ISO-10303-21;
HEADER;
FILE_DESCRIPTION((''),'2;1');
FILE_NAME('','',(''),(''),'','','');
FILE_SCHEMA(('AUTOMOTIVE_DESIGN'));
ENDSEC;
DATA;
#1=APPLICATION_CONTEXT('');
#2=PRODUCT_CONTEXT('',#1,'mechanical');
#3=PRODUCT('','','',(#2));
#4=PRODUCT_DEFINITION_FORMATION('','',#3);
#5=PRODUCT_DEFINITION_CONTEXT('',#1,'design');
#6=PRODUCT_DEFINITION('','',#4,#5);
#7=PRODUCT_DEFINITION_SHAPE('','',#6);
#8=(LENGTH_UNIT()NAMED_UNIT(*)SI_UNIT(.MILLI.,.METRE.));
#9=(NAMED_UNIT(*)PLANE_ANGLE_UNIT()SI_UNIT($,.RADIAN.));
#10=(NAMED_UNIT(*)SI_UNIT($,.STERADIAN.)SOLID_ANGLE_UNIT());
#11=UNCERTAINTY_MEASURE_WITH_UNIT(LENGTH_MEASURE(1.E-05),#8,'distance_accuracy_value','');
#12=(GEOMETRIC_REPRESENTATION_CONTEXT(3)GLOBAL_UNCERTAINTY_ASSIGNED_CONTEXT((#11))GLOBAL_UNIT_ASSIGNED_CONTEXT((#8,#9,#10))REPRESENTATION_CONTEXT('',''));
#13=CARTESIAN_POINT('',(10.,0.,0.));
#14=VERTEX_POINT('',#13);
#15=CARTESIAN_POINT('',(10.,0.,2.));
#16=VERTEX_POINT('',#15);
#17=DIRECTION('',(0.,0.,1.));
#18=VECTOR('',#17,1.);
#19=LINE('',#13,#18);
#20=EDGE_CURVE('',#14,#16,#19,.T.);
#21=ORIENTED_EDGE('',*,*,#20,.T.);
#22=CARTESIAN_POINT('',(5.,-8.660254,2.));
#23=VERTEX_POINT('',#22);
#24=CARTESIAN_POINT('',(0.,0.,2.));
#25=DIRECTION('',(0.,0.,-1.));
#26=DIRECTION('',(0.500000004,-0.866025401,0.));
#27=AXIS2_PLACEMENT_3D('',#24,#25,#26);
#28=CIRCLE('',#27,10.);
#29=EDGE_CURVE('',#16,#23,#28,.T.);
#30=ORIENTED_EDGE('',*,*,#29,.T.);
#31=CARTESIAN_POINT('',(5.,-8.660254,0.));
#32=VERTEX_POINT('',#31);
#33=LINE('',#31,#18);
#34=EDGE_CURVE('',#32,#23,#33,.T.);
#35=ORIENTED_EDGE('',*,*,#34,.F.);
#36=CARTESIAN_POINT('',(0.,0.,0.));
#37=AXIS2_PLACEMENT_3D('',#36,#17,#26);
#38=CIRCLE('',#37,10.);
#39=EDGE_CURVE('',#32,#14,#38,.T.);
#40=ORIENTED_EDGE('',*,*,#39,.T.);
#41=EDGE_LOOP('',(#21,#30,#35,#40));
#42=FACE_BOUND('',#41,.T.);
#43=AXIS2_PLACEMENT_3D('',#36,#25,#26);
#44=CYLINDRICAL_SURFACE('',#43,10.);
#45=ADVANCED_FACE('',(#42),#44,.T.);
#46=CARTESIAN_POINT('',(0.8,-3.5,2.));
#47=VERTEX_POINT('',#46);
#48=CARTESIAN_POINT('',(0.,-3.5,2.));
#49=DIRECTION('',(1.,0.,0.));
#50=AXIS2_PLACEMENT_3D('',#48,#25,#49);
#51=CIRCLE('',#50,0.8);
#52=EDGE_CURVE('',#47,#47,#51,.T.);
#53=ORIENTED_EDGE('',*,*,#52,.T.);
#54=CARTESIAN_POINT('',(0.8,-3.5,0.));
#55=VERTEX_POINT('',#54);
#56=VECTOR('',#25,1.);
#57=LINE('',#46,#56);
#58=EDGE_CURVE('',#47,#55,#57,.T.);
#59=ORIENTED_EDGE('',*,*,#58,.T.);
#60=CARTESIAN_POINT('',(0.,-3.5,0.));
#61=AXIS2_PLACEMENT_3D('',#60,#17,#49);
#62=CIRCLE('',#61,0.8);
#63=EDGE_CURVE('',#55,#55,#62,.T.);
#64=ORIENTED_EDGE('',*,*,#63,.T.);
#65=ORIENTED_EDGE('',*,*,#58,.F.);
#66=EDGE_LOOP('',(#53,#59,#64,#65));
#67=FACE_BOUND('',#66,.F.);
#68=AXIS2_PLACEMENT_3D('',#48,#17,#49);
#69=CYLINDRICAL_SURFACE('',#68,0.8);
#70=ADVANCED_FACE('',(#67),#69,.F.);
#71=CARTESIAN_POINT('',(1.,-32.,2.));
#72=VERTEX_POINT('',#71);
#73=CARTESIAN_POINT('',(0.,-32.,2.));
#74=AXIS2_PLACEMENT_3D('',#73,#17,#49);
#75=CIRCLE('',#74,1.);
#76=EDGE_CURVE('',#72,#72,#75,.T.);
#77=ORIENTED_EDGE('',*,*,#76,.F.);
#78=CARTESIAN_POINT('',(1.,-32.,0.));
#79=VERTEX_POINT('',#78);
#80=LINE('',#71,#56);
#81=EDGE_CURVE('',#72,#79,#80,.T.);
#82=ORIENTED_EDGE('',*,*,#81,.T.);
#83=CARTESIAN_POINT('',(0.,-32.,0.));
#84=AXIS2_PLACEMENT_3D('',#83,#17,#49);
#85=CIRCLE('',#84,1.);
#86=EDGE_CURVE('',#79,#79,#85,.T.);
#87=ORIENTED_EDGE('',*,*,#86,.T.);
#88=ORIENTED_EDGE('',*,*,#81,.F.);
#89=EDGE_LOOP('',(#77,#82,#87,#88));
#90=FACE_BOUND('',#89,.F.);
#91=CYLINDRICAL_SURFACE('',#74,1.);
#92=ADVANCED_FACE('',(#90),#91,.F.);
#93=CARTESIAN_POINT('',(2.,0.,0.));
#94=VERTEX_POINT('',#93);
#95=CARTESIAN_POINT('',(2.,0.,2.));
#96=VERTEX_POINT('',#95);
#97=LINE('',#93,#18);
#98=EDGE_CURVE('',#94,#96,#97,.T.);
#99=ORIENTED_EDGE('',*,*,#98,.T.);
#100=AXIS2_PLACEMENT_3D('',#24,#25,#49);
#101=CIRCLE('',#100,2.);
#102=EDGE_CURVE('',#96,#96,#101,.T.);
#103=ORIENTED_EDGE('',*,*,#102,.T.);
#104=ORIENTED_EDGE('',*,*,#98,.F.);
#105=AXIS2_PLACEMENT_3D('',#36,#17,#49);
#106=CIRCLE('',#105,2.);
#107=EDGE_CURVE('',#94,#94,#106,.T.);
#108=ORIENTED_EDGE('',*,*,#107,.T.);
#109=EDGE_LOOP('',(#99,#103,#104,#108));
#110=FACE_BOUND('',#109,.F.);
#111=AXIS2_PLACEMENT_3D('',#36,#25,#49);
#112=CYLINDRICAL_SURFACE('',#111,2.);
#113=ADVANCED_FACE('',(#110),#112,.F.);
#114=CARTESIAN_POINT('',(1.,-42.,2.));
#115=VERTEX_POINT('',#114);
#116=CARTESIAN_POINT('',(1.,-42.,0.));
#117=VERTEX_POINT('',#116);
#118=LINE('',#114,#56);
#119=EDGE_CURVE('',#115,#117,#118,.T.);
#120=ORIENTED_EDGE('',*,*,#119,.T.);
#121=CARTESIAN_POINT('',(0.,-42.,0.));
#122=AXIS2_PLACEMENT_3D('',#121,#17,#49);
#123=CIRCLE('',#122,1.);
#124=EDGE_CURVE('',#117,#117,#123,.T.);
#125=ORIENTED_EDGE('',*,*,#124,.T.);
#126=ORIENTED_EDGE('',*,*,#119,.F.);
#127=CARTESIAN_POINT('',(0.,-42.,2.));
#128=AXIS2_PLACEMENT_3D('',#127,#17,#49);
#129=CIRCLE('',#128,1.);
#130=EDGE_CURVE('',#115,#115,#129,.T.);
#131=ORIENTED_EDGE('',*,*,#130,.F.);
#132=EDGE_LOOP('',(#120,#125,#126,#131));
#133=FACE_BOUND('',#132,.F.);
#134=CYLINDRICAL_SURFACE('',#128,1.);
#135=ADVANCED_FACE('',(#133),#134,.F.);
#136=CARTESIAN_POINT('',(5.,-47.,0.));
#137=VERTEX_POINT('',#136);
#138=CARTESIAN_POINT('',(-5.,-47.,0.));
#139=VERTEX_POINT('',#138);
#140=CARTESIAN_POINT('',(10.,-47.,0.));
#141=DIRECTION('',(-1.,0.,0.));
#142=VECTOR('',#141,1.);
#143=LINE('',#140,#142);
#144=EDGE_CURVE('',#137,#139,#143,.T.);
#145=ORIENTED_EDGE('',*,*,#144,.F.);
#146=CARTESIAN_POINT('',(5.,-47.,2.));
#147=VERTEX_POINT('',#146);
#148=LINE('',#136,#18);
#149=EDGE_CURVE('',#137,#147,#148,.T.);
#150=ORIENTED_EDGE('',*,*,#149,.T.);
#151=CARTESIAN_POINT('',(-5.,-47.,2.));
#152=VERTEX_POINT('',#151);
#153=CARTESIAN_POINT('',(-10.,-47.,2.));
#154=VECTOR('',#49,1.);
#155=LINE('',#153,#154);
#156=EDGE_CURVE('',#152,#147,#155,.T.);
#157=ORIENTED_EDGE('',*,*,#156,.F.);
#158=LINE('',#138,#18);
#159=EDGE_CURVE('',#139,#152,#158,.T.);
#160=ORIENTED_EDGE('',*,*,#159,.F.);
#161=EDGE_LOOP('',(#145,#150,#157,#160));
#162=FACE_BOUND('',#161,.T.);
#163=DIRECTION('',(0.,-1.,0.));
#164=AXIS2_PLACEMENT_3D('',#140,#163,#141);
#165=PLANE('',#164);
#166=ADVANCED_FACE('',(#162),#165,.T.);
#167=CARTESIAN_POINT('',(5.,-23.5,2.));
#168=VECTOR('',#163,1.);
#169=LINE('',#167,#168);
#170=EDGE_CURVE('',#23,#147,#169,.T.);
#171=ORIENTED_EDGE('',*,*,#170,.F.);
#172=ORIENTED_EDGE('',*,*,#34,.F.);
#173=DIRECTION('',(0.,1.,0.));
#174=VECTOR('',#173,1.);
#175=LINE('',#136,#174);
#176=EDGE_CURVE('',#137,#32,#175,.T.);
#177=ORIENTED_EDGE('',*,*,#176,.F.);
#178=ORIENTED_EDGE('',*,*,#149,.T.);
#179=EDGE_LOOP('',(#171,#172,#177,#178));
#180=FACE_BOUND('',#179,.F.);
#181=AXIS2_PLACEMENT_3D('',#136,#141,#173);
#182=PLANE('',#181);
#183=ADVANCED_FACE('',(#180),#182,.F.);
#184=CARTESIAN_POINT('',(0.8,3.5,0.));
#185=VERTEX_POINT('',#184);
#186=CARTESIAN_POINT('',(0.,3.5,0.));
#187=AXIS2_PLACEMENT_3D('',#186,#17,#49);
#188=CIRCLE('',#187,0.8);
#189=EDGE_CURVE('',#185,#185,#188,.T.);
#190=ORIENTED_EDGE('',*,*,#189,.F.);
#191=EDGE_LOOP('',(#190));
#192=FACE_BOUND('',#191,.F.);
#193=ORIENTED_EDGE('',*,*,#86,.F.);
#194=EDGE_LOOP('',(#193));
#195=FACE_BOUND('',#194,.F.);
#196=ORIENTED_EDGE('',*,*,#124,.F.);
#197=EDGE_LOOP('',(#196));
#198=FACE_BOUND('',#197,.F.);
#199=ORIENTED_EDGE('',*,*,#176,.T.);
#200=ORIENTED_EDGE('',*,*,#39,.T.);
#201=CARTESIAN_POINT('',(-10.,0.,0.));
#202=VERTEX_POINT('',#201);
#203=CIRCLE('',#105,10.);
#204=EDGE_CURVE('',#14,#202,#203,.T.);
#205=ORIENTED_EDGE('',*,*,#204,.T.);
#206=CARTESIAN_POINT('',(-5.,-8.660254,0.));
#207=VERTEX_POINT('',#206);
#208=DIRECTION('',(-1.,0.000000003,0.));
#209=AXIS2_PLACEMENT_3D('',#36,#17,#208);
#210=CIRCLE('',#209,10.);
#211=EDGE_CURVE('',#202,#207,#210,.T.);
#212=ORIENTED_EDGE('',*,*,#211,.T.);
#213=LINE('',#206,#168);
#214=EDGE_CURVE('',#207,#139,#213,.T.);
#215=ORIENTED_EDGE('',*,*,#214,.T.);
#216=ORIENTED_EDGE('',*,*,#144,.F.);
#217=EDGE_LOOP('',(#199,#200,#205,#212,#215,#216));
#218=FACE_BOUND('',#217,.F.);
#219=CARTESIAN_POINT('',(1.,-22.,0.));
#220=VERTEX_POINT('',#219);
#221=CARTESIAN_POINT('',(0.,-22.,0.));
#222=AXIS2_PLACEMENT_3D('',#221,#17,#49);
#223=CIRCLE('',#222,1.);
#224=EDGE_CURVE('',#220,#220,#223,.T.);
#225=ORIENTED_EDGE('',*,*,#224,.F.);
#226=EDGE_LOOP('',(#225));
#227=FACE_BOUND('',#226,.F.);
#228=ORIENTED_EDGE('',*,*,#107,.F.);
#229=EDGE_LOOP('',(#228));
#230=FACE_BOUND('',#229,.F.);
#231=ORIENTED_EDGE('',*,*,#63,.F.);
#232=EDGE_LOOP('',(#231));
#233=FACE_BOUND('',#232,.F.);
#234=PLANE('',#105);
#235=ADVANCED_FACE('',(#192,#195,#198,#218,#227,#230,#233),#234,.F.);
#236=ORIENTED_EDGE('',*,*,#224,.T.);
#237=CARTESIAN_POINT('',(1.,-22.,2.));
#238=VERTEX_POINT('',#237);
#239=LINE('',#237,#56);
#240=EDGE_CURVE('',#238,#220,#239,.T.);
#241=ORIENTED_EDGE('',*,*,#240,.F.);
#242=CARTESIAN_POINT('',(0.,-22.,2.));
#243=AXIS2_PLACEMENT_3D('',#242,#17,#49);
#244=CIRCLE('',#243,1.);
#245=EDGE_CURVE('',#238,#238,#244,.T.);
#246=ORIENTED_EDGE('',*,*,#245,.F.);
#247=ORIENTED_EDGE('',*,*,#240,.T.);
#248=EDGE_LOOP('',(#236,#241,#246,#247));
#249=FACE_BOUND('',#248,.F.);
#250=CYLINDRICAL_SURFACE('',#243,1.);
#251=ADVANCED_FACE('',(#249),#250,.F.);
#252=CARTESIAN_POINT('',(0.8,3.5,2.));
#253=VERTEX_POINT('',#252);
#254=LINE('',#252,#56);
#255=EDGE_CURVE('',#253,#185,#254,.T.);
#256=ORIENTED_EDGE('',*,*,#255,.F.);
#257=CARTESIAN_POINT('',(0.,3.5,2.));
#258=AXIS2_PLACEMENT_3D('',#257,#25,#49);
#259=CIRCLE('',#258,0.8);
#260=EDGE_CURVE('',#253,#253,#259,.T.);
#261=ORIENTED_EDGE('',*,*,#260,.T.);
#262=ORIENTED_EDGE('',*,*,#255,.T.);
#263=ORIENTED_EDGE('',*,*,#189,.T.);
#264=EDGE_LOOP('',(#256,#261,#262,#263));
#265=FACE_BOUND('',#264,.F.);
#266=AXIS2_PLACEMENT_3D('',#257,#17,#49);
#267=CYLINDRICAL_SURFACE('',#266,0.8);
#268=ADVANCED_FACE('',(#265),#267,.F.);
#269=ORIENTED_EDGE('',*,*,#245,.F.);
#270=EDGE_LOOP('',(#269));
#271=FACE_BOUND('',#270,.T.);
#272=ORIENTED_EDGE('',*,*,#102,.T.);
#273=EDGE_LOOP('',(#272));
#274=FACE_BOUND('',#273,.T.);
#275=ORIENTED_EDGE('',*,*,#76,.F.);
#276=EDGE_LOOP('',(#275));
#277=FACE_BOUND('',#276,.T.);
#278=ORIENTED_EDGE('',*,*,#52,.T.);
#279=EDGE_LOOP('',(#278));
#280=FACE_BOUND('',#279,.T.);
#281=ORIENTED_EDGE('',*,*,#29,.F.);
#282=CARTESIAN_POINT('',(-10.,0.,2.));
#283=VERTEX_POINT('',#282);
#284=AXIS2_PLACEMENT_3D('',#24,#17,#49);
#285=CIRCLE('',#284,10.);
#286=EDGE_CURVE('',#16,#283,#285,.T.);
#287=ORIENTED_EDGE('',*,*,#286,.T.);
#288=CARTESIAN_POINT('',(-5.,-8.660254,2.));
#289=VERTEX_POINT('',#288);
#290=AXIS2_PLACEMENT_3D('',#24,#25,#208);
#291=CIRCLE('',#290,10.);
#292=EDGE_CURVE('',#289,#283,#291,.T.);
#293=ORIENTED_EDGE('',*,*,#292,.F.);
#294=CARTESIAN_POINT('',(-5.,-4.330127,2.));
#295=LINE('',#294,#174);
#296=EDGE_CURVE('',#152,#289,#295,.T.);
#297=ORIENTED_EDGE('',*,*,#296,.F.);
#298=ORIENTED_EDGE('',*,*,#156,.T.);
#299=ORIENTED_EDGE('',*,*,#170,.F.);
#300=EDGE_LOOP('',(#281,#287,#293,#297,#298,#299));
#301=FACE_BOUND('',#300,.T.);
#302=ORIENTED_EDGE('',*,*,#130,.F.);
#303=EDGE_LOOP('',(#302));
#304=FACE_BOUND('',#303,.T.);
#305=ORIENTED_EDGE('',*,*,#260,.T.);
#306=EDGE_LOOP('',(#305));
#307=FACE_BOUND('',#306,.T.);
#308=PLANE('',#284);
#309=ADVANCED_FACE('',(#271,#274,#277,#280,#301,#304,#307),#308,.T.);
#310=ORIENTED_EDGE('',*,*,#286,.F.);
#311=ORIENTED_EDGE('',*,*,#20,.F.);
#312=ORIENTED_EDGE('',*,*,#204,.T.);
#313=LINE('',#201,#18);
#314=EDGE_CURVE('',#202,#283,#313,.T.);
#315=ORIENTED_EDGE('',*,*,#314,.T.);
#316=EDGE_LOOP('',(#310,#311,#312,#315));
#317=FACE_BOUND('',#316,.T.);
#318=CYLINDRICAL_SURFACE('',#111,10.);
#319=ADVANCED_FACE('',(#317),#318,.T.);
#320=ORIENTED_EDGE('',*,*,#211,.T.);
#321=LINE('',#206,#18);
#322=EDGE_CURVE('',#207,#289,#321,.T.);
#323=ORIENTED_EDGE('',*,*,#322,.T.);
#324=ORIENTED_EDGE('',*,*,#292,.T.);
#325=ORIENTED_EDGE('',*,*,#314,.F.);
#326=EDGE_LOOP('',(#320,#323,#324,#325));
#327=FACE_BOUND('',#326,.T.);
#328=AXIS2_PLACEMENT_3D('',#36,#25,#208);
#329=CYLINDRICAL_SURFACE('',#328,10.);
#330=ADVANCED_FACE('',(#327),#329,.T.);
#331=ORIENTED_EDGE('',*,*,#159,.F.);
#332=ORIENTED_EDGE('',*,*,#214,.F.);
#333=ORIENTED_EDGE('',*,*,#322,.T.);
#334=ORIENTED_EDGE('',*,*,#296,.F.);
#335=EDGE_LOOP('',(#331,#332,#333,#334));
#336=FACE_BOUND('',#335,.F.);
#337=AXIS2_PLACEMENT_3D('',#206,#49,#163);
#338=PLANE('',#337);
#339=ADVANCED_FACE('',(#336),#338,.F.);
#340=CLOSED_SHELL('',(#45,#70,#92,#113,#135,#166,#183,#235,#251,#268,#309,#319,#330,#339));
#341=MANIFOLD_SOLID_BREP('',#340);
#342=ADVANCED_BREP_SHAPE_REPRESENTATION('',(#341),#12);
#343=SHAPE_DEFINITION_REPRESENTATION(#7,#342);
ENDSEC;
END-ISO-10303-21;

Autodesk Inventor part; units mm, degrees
ref_plane "YZ Plane" through (0, 0, 0) normal (1, 0, 0) x (0, 1, 0)
ref_plane "XZ Plane" through (0, 0, 0) normal (0, 1, 0) x (-1, 0, 0)
ref_plane "XY Plane" through (0, 0, 0) normal (0, 0, 1) x (1, 0, 0)
sketch "スケッチ1" plane through (0, 0, 0) normal (0, 0, 1) x (1, 0, 0)
  circle A0 centre (0, 0) radius 10
  circle A1 centre (0, 0) radius 2
  line L0 (0, -2) -> (0, -47)
  line L1 (10, 0) -> (10, -47)
  line L2 (10, -47) -> (-10, -47)
  line L3 (-10, -47) -> (-10, 0)
  circle A2 centre (0, -32) radius 1
  circle A3 centre (0, -42) radius 1
  circle A4 centre (0, -22) radius 1
  dimension "d1" = 4
  dimension "d0" = 20
  dimension "d2" = 45
  dimension "d9" = 2
  dimension "d10" = 2
  dimension "d11" = 2
extrude "押し出し1" add sketch "スケッチ1" along normal blind 2
sketch "スケッチ2" plane through (0, 0, 2) normal (0, 0, 1) x (1, 0, 0)
  circle A0 centre (0, -32) radius 1
  circle A1 centre (0, -22) radius 1
  circle A2 centre (0, -42) radius 1
  point P0 (0, 0)
  dimension "d12" = 2
  dimension "d13" = 2
  dimension "d14" = 2
extrude "押し出し2" cut sketch "スケッチ2" against normal blind 10
sketch "スケッチ3" plane through (0, 0, 0) normal (0, 0, -1) x (-1, 0, 0)
  line L0 (10, -47) -> (-10, -47)
  line L1 (10, -47) -> (5, -47)
  circle A0 centre (0, 0) radius 10
  line L2 (5, -47) -> (5, -8.660254)
  line L3 (10, 0) -> (10, -47)
  line L4 (10, -47) -> (10, 0)
  line L5 (-10, -47) -> (-10, 0)
  line L6 (-10, 0) -> (-10, -47)
  line L7 (-10, -47) -> (-5, -47)
  line L8 (-5, -47) -> (-5, -8.660254)
  dimension "d17" = 5
  dimension "d18" = 5
sketch "スケッチ3 outline for 押し出し3" plane through (0, 0, 0) normal (0, 0, -1) x (-1, 0, 0)
  line L0 (-5, -47) -> (-5, -8.660254)
  line L1 (-10, -47) -> (-5, -47)
  line L2 (-10, 0) -> (-10, -47)
  arc A0 (-5, -8.660254) -> (-10, 0) centre (0, 0) cw
  line L3 (10, -47) -> (10, 0)
  line L4 (5, -47) -> (10, -47)
  line L5 (5, -8.660254) -> (5, -47)
  arc A1 (10, 0) -> (5, -8.660254) centre (0, 0) cw
extrude "押し出し3" cut sketch "スケッチ3 outline for 押し出し3" against normal blind 10
sketch "スケッチ5" plane through (0, 0, 2) normal (0, 0, 1) x (1, 0, 0)
  circle A0 centre (0, 0) radius 3.5
  circle A1 centre (0, 3.5) radius 0.8
  circle A2 centre (0, -3.5) radius 0.8
  dimension "d31" = 7
  dimension "d32" = 1.6
  dimension "d33" = 1.6
extrude "押し出し5" cut sketch "スケッチ5" against normal blind 10 contours A1 A0 | A0 A1 | A2 A0 | A0 A2
thread "ねじ3" size "M1.6x0.35" class "6H" standard "ANSI Metric M Profile" full length
thread "ねじ4" size "M1.6x0.35" class "6H" standard "ANSI Metric M Profile" full length
properties part number "cutter_board"
